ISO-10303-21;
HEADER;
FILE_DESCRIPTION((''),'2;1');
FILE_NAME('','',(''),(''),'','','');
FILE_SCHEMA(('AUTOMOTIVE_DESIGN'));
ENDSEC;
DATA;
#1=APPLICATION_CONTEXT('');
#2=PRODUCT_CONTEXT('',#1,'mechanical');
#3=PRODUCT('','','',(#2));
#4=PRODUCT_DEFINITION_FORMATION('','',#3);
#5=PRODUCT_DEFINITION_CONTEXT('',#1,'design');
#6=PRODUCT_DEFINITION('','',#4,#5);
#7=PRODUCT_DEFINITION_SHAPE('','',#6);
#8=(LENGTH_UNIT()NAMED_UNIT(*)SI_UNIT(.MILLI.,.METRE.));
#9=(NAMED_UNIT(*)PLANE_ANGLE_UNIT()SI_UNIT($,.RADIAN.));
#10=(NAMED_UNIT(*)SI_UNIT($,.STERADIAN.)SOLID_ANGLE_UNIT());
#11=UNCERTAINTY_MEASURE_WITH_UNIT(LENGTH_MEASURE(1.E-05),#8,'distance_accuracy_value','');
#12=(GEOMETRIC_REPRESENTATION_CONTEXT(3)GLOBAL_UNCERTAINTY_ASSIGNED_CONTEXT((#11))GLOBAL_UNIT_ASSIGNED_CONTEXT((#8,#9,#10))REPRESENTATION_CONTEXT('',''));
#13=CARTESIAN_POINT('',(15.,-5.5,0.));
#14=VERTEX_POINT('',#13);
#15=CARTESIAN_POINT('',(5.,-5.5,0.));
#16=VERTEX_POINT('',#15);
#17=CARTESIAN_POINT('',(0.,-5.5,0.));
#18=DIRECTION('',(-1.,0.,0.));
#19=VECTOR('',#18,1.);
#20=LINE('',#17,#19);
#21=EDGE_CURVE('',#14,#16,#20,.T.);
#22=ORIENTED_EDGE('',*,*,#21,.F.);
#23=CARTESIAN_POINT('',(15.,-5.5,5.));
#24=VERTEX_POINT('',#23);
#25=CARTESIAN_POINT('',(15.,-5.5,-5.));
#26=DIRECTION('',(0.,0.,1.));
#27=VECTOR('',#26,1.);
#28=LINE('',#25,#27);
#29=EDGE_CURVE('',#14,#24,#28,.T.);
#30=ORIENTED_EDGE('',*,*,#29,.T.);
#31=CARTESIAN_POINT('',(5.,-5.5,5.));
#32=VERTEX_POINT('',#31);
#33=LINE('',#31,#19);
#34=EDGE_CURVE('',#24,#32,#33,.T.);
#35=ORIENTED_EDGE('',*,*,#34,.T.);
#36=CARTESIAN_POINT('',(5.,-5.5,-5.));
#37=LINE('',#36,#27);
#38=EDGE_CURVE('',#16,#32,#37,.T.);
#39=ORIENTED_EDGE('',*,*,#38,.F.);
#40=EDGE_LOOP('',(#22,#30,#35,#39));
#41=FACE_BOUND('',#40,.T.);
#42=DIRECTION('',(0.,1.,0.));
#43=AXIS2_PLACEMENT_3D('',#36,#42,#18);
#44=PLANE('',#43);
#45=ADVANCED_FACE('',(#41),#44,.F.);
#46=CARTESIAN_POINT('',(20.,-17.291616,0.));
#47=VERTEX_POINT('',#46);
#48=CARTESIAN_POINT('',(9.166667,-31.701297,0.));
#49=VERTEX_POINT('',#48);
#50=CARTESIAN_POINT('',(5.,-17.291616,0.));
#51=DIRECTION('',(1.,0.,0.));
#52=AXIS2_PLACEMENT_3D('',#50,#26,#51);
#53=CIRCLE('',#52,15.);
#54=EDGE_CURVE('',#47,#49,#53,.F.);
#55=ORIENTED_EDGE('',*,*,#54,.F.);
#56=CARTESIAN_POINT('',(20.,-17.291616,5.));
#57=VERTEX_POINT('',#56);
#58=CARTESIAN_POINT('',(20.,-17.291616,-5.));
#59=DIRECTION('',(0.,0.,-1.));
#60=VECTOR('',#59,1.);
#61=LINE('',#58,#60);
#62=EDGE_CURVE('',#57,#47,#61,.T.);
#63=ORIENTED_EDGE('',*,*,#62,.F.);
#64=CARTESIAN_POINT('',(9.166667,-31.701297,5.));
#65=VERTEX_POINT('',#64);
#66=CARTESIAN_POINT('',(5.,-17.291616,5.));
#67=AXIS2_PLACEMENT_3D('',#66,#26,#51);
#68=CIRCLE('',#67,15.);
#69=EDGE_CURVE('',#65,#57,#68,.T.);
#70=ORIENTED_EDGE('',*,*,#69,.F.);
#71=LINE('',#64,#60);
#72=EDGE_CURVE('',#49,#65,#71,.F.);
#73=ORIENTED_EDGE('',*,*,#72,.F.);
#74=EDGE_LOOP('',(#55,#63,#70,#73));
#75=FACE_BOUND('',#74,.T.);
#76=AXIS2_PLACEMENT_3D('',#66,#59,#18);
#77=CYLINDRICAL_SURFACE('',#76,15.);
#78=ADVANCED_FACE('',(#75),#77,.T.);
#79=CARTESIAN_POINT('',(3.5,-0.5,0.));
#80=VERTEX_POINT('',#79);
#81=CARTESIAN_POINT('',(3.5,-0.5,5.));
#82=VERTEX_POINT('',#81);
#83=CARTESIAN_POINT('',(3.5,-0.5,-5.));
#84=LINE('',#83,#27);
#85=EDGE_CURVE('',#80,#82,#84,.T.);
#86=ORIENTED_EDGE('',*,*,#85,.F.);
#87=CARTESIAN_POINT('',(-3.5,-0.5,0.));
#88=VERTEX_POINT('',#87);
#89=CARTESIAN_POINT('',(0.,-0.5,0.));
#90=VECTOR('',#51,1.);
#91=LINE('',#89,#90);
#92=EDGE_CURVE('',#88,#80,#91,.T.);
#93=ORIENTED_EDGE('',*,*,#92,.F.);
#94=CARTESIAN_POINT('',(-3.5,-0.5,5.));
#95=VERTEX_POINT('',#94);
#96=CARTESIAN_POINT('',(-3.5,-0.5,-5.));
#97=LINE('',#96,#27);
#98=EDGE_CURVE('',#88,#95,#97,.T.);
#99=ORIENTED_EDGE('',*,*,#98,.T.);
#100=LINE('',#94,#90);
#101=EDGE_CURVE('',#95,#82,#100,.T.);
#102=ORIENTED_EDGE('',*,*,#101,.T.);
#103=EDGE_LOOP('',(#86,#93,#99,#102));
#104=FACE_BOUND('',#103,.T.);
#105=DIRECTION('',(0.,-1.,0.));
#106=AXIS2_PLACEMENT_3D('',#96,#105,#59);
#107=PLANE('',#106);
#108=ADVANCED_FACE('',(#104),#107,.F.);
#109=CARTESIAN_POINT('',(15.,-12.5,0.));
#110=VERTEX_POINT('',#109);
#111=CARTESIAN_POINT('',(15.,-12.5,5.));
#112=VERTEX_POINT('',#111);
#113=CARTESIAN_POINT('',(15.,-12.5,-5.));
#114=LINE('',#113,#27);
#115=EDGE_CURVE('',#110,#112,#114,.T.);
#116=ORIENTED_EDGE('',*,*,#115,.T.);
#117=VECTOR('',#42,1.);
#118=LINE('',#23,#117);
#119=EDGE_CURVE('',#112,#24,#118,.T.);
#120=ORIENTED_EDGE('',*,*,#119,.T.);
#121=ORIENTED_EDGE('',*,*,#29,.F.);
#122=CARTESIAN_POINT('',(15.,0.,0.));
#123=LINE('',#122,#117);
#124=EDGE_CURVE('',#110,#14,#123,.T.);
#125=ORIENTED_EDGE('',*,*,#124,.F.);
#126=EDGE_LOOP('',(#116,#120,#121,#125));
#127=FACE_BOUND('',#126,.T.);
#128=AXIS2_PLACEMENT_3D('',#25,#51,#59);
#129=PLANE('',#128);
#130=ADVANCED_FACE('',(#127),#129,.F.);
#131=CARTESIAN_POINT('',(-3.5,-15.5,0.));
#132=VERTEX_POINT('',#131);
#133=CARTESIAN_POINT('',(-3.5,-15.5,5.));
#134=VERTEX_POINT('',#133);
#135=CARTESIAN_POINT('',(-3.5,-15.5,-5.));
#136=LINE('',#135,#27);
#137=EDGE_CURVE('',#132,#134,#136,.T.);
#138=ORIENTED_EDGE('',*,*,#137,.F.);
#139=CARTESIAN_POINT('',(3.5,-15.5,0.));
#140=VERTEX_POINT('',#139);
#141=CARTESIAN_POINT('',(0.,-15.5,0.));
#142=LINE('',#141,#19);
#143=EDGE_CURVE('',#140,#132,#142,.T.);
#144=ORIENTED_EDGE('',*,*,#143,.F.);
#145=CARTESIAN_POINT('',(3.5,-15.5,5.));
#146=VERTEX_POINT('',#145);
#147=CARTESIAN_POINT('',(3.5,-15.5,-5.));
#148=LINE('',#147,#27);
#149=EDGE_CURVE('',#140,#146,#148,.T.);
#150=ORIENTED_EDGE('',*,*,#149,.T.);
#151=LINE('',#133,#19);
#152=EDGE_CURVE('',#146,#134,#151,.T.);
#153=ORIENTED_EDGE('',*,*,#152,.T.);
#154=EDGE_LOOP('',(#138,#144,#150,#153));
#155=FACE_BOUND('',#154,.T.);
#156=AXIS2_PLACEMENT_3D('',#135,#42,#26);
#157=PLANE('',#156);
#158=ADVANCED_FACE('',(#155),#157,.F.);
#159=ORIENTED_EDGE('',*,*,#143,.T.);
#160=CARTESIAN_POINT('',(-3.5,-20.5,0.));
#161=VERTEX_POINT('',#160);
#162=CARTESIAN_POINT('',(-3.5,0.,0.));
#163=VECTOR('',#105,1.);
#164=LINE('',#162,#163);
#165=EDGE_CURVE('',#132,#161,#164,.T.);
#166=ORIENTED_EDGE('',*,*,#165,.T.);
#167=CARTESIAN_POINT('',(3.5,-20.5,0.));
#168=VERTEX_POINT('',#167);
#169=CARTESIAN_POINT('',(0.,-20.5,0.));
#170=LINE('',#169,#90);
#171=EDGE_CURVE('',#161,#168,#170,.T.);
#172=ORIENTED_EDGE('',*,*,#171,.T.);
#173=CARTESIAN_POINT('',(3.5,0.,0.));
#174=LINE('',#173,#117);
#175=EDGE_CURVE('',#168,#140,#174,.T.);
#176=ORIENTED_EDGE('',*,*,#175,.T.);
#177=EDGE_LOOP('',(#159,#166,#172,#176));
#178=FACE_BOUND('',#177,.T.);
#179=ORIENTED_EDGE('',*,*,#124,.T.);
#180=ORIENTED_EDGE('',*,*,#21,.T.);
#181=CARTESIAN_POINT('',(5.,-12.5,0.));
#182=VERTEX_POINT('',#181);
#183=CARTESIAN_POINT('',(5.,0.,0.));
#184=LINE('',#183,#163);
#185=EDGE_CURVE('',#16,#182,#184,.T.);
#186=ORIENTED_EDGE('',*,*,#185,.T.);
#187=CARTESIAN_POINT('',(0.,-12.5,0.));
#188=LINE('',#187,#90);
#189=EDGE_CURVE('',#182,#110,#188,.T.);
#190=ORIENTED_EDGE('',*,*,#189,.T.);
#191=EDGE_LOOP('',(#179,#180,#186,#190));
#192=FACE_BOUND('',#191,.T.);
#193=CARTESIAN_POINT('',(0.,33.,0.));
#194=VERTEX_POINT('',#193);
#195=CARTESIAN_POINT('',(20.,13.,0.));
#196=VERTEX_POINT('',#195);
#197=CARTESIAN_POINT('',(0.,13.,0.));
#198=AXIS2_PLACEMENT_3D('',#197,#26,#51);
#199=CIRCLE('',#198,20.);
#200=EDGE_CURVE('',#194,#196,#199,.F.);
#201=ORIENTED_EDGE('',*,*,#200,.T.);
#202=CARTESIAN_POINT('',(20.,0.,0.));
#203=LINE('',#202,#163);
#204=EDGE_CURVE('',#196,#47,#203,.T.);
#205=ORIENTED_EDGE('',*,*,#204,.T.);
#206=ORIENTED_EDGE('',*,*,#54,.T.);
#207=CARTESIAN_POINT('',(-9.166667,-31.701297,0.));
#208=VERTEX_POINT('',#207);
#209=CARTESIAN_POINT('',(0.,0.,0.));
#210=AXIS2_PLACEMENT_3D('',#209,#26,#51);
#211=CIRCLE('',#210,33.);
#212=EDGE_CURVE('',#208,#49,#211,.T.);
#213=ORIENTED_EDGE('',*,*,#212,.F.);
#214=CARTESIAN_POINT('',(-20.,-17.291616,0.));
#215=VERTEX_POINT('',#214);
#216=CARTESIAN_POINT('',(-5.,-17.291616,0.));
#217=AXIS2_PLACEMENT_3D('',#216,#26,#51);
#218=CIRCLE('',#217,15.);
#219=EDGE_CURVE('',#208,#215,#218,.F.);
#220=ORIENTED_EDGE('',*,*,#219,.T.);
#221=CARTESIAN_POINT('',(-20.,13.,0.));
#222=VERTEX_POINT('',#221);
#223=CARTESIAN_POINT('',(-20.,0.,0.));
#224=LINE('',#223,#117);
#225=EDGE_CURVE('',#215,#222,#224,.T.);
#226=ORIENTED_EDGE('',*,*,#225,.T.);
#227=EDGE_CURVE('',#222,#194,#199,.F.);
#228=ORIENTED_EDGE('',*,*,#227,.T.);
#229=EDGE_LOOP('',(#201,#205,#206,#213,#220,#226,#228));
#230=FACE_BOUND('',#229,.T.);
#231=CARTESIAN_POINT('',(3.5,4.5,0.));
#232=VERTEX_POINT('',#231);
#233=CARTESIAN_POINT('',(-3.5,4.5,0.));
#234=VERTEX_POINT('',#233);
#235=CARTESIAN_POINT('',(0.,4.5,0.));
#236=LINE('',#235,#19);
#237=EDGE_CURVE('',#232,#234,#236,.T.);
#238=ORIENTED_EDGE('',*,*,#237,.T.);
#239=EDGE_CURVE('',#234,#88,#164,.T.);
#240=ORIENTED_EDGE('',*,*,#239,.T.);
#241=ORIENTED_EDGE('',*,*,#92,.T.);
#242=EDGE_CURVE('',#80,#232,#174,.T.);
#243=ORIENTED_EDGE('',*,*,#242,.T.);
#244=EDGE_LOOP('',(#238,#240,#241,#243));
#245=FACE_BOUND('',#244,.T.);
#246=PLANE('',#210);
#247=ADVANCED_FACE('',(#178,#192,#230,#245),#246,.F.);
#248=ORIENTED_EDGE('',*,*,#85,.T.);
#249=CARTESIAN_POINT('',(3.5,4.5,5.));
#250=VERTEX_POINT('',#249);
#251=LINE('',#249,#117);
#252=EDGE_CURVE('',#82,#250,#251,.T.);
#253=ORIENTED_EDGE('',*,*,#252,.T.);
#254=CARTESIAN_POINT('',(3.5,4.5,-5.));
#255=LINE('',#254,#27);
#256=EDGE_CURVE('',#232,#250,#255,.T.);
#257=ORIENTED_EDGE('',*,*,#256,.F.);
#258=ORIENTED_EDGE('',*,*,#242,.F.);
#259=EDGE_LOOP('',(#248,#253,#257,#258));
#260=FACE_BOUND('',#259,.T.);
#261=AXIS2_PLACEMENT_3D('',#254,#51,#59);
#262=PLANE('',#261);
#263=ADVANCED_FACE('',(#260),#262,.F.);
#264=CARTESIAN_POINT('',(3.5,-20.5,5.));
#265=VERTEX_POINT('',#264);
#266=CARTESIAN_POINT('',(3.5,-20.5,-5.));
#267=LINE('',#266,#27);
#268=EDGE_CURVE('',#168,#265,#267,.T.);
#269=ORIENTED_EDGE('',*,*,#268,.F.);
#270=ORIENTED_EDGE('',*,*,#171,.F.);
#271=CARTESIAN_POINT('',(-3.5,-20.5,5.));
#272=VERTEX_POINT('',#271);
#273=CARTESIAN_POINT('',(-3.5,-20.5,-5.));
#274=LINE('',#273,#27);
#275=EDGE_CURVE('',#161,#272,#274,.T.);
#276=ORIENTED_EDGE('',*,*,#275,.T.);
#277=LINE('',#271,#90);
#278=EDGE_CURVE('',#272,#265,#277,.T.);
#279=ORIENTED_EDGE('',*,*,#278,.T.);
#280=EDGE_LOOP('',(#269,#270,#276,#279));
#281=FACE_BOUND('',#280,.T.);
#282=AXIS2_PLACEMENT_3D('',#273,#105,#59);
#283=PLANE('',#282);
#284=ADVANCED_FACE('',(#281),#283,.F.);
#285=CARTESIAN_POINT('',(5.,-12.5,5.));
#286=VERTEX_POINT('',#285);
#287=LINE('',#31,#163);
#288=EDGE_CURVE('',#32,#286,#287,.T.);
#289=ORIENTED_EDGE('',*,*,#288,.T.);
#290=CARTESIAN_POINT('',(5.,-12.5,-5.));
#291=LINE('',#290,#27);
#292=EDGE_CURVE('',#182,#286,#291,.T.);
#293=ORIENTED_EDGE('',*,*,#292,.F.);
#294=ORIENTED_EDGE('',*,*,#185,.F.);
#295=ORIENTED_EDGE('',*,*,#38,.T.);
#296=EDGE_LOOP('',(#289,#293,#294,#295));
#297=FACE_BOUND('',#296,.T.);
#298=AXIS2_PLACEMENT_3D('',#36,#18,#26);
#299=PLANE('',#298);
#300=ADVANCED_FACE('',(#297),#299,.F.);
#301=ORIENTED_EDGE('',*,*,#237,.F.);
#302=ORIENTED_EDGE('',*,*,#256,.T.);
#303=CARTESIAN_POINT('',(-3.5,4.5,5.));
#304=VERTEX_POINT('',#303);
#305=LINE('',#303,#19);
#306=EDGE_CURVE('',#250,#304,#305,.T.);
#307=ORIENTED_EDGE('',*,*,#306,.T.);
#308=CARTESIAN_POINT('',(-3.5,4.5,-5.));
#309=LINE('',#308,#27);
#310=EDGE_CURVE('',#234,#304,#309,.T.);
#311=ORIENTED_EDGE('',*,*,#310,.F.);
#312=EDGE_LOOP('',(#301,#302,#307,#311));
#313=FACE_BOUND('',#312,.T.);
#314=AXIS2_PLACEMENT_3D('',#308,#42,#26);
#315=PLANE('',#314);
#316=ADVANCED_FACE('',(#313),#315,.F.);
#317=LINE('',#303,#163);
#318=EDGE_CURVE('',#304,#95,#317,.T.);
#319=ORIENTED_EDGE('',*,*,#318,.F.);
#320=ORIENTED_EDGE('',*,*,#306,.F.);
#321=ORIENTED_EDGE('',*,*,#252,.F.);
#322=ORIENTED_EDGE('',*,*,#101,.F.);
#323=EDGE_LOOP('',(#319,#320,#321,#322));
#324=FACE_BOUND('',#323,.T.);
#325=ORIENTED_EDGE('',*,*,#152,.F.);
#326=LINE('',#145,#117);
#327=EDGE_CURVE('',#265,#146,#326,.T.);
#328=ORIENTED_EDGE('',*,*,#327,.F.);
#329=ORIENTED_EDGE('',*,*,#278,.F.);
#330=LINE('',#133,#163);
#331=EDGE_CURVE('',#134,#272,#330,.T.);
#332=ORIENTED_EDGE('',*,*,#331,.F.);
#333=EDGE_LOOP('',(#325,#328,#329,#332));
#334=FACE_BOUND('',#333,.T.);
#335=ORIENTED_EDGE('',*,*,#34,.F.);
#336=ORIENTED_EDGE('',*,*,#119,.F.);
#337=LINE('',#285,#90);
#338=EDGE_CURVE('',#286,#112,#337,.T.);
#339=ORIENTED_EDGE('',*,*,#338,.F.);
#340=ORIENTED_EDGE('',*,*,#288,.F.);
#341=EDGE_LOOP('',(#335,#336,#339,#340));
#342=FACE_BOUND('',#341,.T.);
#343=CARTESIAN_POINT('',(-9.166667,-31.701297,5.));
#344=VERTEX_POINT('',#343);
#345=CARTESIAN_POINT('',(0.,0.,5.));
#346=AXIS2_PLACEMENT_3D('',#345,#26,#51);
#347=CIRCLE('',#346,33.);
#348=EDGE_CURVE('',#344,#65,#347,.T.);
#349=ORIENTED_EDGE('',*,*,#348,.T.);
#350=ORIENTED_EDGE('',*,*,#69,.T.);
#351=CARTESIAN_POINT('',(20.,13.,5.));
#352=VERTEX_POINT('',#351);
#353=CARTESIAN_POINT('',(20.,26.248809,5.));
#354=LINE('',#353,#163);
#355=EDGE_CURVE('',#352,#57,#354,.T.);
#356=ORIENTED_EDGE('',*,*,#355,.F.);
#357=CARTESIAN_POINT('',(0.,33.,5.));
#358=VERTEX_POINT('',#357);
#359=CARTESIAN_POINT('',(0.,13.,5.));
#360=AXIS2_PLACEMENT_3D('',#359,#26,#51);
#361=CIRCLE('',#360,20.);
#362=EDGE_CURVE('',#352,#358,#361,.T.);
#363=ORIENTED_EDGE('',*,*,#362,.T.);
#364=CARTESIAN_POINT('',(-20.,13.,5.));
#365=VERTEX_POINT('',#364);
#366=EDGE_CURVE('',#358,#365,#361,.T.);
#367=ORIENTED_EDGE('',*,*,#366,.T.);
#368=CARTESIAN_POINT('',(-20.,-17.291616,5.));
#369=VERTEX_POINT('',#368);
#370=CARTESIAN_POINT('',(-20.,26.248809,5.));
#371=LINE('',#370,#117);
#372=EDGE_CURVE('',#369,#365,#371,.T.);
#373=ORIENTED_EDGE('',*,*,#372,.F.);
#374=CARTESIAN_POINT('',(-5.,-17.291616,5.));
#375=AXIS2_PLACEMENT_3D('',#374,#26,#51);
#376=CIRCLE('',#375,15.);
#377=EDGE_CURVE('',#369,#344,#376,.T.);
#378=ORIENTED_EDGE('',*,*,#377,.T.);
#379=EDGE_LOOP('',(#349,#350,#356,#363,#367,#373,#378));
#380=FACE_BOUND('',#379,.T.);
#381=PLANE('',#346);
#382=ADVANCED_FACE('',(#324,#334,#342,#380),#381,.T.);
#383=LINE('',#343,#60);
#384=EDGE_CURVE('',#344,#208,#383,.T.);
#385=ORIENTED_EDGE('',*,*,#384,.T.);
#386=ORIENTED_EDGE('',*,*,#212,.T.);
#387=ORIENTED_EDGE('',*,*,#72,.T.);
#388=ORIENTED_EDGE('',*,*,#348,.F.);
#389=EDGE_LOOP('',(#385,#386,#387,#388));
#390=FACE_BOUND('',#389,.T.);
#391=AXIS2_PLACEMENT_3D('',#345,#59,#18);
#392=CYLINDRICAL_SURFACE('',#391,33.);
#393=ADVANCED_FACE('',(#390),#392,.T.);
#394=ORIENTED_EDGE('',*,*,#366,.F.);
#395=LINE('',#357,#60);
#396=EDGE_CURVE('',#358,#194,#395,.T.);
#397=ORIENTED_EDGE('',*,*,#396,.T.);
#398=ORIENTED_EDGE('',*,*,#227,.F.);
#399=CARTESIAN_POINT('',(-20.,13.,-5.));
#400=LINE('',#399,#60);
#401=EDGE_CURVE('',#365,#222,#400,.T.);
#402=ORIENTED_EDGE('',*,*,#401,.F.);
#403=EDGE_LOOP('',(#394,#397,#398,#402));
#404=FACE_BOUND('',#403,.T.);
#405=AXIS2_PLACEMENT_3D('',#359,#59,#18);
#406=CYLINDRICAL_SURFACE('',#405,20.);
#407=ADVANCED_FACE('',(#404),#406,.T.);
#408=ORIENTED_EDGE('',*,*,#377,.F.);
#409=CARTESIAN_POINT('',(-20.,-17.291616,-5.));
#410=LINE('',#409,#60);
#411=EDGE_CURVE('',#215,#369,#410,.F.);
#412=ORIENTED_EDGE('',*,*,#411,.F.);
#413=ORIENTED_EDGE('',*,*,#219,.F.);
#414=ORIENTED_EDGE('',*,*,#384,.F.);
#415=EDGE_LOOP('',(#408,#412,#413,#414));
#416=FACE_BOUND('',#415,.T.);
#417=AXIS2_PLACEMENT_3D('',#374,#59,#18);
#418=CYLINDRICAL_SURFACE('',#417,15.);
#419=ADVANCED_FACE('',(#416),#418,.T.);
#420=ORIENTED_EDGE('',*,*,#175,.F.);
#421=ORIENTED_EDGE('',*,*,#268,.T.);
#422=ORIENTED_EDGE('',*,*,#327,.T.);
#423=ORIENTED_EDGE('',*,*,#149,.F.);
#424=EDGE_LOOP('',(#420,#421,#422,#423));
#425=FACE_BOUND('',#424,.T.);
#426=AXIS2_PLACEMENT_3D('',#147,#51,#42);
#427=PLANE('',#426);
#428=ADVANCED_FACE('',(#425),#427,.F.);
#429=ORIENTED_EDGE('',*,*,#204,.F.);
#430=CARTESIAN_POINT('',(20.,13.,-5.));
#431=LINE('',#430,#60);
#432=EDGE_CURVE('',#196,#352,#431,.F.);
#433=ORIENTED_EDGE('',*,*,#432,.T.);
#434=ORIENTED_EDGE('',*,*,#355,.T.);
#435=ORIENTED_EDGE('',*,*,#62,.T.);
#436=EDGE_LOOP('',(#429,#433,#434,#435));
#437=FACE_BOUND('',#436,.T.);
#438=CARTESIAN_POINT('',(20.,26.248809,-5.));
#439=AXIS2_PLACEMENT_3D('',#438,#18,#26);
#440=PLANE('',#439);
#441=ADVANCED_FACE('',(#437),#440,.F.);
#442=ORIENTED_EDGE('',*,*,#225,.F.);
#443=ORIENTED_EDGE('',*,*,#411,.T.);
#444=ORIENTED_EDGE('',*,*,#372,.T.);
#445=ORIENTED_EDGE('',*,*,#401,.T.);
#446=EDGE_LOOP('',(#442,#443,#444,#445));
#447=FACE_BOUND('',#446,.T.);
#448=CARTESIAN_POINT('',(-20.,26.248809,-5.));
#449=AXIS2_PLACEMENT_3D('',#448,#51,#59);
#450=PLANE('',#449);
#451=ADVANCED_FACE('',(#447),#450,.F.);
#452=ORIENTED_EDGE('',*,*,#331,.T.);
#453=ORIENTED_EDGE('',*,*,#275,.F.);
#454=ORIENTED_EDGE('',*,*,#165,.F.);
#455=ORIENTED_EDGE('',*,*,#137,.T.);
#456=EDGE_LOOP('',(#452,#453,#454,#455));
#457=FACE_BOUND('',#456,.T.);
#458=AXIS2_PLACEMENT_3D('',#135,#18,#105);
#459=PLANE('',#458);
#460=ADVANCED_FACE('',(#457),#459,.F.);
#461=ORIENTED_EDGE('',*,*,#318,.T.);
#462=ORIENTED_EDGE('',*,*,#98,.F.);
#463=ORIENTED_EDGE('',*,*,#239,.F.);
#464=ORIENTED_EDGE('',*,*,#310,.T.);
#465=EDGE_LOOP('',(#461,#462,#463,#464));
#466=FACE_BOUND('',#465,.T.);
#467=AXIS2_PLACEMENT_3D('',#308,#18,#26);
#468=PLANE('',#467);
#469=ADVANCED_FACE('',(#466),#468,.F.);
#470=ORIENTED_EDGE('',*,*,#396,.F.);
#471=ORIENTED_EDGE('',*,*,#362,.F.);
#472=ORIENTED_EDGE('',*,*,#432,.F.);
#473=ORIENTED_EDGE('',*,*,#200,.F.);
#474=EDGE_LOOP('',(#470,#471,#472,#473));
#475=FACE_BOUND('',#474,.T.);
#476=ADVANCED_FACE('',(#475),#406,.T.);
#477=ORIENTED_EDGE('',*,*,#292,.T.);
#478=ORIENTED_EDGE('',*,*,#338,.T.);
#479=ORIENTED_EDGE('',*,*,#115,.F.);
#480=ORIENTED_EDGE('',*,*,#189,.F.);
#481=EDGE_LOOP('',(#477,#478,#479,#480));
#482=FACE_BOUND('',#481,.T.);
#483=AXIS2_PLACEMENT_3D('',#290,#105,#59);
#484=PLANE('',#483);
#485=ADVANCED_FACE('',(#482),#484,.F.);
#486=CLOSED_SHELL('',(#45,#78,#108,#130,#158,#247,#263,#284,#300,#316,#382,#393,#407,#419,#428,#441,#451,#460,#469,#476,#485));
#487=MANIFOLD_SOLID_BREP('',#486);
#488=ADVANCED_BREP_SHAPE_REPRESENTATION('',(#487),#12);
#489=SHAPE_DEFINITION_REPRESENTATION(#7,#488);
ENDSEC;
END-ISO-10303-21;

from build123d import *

# Parameters (mm, degrees)
SKETCH1_R           = 33
BOSS_EXTRUDE1_DEPTH = 5
CUT_EXTRUDE3_START  = -10
CUT_EXTRUDE3_DEPTH  = 10
FILLET2_R           = 20
FILLET3_R           = 15
SKETCH11_W          = 7
SKETCH11_H          = 5
CUT_EXTRUDE4_DEPTH  = 10
SKETCH12_W          = 10
SKETCH12_H          = 7
CUT_EXTRUDE5_DEPTH  = 10


with BuildPart() as part:
    # Sketch1 → Boss-Extrude1 (new body)
    with BuildSketch(Plane.XY):
        Circle(SKETCH1_R)
    extrude(amount=BOSS_EXTRUDE1_DEPTH)

    # Sketch10 → Cut-Extrude3 (cut)
    with BuildSketch(Plane.XY.offset(5).offset(CUT_EXTRUDE3_START)):
        with BuildLine():
            Line((-20, 26.248809497), (-20, -26.248809497))
            ThreePointArc((-20, -26.248809497), (-33, 0), (-20, 26.248809497))
        make_face()
        with BuildLine():
            Line((20, 26.248809497), (20, -26.248809497))
            ThreePointArc((20, -26.248809497), (33, 0), (20, 26.248809497))
        make_face()
    extrude(amount=CUT_EXTRUDE3_DEPTH, mode=Mode.SUBTRACT)

    # Fillet2
    fillet2_edges = [part.edges().sort_by_distance(p)[0] for p in [
        (-20, 26.248809497, 2.5),
        (20, 26.248809497, 2.5),
    ]]
    fillet(fillet2_edges, radius=FILLET2_R - 0.0001)  # a hair under: the kernel refuses the full size

    # Fillet3
    fillet3_edges = [part.edges().sort_by_distance(p)[0] for p in [
        (-20, -26.248809497, 2.5),
        (20, -26.248809497, 2.5),
    ]]
    fillet(fillet3_edges, radius=FILLET3_R)

    # Sketch11 → Cut-Extrude4 (cut)
    with BuildSketch(Plane.XY.offset(5)):
        with Locations((0, 2)):
            Rectangle(SKETCH11_W, SKETCH11_H)
        with Locations((0, -18)):
            Rectangle(SKETCH11_W, SKETCH11_H)
    extrude(amount=-CUT_EXTRUDE4_DEPTH, mode=Mode.SUBTRACT)

    # Sketch12 → Cut-Extrude5 (cut)
    with BuildSketch(Plane.XY.offset(5)):
        with Locations((10, -9)):
            Rectangle(SKETCH12_W, SKETCH12_H)
    extrude(amount=-CUT_EXTRUDE5_DEPTH, mode=Mode.SUBTRACT)


solid = part.part
